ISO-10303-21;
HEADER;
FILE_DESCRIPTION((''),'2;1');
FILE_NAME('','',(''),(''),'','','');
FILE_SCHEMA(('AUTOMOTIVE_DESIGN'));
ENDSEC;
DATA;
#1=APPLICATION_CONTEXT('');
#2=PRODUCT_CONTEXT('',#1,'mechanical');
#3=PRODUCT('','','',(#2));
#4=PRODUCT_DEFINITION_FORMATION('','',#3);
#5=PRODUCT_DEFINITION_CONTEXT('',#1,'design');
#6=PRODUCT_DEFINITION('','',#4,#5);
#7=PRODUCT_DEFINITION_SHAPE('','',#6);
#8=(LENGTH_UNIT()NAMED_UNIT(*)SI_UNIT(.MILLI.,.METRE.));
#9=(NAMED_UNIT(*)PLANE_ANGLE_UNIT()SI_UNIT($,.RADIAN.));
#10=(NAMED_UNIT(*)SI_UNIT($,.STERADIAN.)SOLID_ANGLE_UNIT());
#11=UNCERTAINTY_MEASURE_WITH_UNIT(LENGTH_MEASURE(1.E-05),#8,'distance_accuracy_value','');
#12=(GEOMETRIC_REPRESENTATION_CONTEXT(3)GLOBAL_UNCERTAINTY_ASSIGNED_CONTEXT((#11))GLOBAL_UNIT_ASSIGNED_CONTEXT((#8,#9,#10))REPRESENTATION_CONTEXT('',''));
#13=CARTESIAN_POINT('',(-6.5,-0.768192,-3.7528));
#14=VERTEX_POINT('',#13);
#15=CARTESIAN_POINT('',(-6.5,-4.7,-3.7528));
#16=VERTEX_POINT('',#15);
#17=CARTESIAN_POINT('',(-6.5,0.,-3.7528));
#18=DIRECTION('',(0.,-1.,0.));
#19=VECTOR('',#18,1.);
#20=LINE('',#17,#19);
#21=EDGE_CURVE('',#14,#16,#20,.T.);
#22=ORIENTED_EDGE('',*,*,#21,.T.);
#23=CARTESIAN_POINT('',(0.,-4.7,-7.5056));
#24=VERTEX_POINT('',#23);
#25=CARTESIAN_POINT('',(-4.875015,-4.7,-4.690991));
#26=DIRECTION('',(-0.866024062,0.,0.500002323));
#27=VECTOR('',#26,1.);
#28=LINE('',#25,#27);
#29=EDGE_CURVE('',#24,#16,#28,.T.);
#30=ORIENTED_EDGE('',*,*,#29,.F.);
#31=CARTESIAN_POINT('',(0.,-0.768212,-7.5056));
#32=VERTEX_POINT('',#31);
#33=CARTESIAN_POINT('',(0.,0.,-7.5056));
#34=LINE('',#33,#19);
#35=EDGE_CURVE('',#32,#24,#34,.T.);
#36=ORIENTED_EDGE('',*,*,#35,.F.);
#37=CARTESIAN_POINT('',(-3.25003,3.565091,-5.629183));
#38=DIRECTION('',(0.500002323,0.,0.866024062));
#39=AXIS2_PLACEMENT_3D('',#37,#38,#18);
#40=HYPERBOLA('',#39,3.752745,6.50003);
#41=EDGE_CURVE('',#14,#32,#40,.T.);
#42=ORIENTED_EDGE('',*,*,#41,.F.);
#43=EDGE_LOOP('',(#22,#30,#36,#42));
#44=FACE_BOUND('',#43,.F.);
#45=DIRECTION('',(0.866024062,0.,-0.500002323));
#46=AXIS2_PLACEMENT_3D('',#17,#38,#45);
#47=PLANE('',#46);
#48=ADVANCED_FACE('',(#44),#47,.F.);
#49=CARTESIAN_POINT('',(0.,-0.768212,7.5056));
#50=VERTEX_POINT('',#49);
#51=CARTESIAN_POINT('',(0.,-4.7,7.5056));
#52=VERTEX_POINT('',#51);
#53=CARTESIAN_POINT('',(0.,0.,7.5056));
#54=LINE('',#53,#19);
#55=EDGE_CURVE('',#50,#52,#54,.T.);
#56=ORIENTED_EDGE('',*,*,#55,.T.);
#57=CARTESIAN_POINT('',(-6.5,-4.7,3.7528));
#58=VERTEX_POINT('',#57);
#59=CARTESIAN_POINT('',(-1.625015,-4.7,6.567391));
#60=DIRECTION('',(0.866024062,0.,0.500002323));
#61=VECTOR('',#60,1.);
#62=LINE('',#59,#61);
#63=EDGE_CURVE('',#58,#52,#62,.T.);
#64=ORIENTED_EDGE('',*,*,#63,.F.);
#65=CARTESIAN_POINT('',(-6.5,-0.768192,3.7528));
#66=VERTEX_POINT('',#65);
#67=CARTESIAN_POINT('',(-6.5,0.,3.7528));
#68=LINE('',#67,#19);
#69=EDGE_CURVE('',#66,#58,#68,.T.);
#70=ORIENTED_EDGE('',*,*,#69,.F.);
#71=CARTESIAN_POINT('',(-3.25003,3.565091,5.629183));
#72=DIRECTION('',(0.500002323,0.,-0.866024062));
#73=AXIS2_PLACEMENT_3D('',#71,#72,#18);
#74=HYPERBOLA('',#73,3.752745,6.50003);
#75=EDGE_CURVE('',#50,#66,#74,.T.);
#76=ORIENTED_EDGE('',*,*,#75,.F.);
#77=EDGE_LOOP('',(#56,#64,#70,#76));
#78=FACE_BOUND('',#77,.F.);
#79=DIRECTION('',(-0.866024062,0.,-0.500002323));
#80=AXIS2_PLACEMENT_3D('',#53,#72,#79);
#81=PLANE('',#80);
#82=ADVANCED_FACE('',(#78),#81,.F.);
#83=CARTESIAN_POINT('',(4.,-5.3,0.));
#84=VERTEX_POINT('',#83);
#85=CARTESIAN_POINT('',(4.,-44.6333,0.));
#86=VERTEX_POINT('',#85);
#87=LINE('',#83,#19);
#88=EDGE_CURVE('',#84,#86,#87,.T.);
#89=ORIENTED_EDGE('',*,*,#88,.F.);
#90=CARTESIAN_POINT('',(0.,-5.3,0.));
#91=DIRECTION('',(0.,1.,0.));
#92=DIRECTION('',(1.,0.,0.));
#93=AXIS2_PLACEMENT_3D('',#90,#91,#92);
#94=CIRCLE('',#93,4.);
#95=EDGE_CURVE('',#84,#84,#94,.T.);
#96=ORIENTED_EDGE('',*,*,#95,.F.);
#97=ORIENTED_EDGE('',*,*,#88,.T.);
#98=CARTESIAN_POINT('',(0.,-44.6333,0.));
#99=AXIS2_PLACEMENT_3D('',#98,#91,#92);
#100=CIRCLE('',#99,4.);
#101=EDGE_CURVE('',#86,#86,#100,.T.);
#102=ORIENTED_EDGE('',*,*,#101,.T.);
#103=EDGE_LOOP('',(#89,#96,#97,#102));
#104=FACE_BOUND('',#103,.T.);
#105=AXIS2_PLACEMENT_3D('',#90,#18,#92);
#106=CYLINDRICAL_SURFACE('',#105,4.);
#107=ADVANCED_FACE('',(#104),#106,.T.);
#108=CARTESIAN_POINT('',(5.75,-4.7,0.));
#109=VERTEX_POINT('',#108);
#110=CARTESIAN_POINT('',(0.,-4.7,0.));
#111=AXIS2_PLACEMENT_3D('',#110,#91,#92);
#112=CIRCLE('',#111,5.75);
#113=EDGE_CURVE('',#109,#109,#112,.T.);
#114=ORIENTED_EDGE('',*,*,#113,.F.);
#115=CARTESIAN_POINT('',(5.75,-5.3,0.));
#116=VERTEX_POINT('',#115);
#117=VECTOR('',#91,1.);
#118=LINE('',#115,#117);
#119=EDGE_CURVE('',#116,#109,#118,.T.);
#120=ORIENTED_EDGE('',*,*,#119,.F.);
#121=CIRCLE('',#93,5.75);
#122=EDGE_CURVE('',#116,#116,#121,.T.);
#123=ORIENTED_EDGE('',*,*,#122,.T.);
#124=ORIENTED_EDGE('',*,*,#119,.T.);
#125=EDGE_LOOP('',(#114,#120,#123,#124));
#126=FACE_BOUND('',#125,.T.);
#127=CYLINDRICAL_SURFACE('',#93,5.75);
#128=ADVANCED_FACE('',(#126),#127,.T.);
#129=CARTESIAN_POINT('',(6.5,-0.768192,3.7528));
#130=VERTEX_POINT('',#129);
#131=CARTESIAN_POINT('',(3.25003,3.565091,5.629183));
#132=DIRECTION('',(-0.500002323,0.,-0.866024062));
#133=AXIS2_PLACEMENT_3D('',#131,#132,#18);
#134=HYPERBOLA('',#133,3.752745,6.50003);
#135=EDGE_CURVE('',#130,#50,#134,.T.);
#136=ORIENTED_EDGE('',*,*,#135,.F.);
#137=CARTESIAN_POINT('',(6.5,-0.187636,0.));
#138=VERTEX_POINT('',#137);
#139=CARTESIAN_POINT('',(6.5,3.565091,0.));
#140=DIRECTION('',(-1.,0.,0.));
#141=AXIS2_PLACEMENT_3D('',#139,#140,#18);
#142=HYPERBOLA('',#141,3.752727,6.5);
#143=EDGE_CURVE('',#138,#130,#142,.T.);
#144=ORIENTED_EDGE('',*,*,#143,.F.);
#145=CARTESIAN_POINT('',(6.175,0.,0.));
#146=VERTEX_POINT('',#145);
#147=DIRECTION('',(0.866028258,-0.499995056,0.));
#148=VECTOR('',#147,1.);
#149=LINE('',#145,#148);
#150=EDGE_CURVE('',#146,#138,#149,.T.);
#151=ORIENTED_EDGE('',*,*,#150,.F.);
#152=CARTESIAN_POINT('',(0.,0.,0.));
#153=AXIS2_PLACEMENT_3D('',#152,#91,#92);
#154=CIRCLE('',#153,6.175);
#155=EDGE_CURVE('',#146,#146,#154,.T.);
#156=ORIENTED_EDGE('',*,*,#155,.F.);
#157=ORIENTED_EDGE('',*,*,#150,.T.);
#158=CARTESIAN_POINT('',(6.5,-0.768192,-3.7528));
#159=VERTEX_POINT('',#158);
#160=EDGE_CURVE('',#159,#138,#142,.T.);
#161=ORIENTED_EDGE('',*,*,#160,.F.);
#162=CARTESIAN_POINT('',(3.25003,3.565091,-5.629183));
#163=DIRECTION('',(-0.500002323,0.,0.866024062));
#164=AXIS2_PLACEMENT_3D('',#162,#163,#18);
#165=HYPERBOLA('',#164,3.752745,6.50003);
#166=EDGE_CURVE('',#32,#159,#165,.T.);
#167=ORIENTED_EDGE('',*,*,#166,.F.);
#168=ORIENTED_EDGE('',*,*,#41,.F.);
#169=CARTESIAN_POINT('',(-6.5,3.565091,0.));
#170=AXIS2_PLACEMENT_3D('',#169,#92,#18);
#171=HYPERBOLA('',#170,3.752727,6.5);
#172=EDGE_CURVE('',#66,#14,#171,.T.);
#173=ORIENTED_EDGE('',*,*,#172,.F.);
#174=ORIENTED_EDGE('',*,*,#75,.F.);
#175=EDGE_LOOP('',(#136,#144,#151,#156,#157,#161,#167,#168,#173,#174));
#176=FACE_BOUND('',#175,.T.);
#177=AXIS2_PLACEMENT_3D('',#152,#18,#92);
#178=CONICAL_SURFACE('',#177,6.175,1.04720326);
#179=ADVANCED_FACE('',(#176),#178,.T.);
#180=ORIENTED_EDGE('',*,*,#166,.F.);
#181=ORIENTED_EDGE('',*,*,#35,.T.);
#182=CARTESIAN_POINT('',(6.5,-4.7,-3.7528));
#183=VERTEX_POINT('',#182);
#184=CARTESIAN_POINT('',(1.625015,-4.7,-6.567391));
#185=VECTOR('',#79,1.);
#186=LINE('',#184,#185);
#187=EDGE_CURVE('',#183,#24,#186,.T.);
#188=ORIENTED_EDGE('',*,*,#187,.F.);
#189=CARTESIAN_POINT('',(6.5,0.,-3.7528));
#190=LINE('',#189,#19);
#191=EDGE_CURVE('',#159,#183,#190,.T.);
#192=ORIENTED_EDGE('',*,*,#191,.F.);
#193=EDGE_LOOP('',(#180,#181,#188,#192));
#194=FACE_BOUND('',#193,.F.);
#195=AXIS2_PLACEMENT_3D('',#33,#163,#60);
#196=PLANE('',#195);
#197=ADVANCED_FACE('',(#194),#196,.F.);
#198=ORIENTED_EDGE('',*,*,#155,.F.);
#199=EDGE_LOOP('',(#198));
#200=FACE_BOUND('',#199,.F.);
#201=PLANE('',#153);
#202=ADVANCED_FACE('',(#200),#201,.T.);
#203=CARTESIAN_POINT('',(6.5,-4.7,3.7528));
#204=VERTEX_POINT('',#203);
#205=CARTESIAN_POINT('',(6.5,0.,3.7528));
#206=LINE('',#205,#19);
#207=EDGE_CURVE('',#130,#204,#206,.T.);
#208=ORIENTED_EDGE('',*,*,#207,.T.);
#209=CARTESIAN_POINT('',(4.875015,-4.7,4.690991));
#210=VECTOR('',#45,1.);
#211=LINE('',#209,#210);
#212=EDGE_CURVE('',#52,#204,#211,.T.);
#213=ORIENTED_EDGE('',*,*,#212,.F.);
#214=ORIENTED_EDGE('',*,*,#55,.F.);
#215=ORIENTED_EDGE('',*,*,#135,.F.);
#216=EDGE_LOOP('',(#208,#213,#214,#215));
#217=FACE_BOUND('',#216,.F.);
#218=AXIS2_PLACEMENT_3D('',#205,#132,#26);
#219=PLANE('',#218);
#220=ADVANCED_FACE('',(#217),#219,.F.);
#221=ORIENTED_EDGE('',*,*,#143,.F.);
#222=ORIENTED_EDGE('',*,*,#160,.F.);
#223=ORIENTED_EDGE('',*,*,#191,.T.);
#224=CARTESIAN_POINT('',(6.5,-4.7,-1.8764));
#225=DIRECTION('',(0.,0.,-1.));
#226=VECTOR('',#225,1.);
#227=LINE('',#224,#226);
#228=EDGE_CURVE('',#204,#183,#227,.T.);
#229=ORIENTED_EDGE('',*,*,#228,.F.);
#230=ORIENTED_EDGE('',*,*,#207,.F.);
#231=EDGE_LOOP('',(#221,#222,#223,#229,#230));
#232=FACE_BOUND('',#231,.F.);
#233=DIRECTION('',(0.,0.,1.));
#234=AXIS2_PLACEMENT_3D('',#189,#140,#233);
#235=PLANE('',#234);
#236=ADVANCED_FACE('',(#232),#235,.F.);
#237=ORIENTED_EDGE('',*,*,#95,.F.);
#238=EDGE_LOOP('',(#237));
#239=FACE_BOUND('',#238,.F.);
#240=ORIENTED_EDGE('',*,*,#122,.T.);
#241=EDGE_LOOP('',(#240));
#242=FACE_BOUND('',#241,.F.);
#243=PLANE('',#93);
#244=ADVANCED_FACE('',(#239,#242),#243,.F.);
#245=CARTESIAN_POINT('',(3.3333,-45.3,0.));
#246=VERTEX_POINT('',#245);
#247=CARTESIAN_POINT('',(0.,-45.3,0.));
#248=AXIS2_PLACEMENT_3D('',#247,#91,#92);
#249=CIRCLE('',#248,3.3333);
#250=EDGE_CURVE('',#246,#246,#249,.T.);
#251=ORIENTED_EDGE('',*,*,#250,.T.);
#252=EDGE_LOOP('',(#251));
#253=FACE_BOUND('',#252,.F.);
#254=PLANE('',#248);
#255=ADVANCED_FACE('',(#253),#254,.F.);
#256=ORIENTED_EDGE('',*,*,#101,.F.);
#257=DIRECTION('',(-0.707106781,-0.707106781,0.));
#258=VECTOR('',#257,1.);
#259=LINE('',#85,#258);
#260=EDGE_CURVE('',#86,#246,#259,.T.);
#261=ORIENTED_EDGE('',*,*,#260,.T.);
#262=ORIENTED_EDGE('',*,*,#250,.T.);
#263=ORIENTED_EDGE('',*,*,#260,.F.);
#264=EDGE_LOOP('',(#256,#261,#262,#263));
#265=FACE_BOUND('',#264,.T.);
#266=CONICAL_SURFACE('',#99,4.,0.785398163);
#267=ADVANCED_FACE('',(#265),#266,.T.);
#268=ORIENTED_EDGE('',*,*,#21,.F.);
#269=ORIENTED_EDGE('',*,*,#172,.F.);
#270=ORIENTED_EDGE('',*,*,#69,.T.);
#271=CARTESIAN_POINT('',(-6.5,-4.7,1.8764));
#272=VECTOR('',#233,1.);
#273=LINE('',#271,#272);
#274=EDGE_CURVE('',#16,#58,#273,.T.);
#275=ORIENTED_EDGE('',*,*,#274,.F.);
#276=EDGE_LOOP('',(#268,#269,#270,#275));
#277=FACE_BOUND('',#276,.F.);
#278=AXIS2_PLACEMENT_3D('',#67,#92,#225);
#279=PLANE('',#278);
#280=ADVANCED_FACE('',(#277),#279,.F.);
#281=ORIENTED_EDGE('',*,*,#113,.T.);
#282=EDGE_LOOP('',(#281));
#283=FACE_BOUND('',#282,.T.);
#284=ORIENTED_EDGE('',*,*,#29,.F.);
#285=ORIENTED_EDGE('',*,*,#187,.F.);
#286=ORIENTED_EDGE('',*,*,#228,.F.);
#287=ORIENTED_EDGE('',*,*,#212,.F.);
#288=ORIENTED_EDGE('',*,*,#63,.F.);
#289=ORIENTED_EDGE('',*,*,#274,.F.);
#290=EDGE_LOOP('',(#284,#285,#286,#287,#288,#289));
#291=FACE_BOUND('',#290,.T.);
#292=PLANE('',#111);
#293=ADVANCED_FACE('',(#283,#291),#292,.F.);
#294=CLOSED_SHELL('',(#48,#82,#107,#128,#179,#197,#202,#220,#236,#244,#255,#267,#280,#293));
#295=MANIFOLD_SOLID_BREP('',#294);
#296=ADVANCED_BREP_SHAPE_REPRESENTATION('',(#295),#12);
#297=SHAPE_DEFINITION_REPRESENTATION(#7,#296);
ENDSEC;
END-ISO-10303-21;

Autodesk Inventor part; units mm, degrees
ref_plane "YZ Plane" through (0, 0, 0) normal (1, 0, 0) x (0, 1, 0)
ref_plane "XZ Plane" through (0, 0, 0) normal (0, 1, 0) x (-1, 0, 0)
ref_plane "XY Plane" through (0, 0, 0) normal (0, 0, 1) x (1, 0, 0)
sketch "Sketch1" plane through (0, 0, 0) normal (0, 0, 1) x (1, 0, 0)
  line L0 (0, 0) -> (6.175, 0)
  line L1 (9.75, -2.064) -> (9.75, -4.7)
  line L2 (5.75, -5.3) -> (4, -5.3)
  line L3 (4, -5.3) -> (4, -45.3)
  line L4 (4, -45.3) -> (0, -45.3)
  line L5 (0, -45.3) -> (0, 0)
  line L6 (5.75, -5.3) -> (5.75, -4.7)
  line L7 (5.75, -4.7) -> (9.75, -4.7)
  line L8 (6.175, 0) -> (9.75, -2.064)
  dimension "d0" = 19.5
  dimension "d1" = 8
  dimension "d3" = 40
  dimension "d4" = 11.5
  dimension "d5" = 0.6
  dimension "d22" = 30
  dimension "d23" = 12.35
  dimension "d24" = 5.3
revolve "Revolution1" add sketch "Sketch1" angle 360 about axis through (0, -45.3, 0) along (0, 1, 0)
sketch "Sketch2" plane through (0, 0, 0) normal (0, 1, 0) x (1, 0, 0)
  line L0 (0, -7.5056) -> (-6.5, -3.7528)
  line L1 (-6.5, -3.7528) -> (-6.5, 3.7528)
  line L2 (-6.5, 3.7528) -> (0, 7.5056)
  line L3 (0, 7.5056) -> (6.5, 3.7528)
  line L4 (6.5, 3.7528) -> (6.5, -3.7528)
  line L5 (6.5, -3.7528) -> (0, -7.5056)
  circle A0 centre (0, 0) radius 9.75 projected
  point P0 (0, 0)
  point P1 (0, 0)
  dimension "d25" = 13
extrude "Extrusion1" cut sketch "Sketch2" against normal blind 5.3
thread "Thread1" size "M8x1.25" class "6g" standard "ISO Metric profile" length 22
chamfer "Chamfer1" distance 0.6667 angle 45 1 edges at (-4, -45.3, 0)
equation "\"d0\" = 1.5 * S_"
equation "\"d1\" = d1_"
equation "\"d3\" = L"
equation "\"d4\" = dw"
equation "\"d5\" = hw"
equation "\"d23\" = 0.95 * S_"
equation "\"d24\" = k"
equation "\"d14\" = b"
equation "\"d16\" = 0.0833333 * d"
equation "\"d25\" = S_"
equation "\"d26\" = k"
equation "\"d\" = 8"
equation "\"d1_\" = 8"
equation "\"S_\" = 13"
equation "\"k\" = 5.3"
equation "\"e\" = 14.2"
equation "\"L\" = 40"
equation "\"b\" = 22"
equation "\"Grip_Length\" = 18"
equation "\"dw\" = 11.5"
equation "\"hw\" = 0.6"
properties part number "Bolt A M8-6g×40(S13) GOST 7798-70" material "Steel, Mild"
